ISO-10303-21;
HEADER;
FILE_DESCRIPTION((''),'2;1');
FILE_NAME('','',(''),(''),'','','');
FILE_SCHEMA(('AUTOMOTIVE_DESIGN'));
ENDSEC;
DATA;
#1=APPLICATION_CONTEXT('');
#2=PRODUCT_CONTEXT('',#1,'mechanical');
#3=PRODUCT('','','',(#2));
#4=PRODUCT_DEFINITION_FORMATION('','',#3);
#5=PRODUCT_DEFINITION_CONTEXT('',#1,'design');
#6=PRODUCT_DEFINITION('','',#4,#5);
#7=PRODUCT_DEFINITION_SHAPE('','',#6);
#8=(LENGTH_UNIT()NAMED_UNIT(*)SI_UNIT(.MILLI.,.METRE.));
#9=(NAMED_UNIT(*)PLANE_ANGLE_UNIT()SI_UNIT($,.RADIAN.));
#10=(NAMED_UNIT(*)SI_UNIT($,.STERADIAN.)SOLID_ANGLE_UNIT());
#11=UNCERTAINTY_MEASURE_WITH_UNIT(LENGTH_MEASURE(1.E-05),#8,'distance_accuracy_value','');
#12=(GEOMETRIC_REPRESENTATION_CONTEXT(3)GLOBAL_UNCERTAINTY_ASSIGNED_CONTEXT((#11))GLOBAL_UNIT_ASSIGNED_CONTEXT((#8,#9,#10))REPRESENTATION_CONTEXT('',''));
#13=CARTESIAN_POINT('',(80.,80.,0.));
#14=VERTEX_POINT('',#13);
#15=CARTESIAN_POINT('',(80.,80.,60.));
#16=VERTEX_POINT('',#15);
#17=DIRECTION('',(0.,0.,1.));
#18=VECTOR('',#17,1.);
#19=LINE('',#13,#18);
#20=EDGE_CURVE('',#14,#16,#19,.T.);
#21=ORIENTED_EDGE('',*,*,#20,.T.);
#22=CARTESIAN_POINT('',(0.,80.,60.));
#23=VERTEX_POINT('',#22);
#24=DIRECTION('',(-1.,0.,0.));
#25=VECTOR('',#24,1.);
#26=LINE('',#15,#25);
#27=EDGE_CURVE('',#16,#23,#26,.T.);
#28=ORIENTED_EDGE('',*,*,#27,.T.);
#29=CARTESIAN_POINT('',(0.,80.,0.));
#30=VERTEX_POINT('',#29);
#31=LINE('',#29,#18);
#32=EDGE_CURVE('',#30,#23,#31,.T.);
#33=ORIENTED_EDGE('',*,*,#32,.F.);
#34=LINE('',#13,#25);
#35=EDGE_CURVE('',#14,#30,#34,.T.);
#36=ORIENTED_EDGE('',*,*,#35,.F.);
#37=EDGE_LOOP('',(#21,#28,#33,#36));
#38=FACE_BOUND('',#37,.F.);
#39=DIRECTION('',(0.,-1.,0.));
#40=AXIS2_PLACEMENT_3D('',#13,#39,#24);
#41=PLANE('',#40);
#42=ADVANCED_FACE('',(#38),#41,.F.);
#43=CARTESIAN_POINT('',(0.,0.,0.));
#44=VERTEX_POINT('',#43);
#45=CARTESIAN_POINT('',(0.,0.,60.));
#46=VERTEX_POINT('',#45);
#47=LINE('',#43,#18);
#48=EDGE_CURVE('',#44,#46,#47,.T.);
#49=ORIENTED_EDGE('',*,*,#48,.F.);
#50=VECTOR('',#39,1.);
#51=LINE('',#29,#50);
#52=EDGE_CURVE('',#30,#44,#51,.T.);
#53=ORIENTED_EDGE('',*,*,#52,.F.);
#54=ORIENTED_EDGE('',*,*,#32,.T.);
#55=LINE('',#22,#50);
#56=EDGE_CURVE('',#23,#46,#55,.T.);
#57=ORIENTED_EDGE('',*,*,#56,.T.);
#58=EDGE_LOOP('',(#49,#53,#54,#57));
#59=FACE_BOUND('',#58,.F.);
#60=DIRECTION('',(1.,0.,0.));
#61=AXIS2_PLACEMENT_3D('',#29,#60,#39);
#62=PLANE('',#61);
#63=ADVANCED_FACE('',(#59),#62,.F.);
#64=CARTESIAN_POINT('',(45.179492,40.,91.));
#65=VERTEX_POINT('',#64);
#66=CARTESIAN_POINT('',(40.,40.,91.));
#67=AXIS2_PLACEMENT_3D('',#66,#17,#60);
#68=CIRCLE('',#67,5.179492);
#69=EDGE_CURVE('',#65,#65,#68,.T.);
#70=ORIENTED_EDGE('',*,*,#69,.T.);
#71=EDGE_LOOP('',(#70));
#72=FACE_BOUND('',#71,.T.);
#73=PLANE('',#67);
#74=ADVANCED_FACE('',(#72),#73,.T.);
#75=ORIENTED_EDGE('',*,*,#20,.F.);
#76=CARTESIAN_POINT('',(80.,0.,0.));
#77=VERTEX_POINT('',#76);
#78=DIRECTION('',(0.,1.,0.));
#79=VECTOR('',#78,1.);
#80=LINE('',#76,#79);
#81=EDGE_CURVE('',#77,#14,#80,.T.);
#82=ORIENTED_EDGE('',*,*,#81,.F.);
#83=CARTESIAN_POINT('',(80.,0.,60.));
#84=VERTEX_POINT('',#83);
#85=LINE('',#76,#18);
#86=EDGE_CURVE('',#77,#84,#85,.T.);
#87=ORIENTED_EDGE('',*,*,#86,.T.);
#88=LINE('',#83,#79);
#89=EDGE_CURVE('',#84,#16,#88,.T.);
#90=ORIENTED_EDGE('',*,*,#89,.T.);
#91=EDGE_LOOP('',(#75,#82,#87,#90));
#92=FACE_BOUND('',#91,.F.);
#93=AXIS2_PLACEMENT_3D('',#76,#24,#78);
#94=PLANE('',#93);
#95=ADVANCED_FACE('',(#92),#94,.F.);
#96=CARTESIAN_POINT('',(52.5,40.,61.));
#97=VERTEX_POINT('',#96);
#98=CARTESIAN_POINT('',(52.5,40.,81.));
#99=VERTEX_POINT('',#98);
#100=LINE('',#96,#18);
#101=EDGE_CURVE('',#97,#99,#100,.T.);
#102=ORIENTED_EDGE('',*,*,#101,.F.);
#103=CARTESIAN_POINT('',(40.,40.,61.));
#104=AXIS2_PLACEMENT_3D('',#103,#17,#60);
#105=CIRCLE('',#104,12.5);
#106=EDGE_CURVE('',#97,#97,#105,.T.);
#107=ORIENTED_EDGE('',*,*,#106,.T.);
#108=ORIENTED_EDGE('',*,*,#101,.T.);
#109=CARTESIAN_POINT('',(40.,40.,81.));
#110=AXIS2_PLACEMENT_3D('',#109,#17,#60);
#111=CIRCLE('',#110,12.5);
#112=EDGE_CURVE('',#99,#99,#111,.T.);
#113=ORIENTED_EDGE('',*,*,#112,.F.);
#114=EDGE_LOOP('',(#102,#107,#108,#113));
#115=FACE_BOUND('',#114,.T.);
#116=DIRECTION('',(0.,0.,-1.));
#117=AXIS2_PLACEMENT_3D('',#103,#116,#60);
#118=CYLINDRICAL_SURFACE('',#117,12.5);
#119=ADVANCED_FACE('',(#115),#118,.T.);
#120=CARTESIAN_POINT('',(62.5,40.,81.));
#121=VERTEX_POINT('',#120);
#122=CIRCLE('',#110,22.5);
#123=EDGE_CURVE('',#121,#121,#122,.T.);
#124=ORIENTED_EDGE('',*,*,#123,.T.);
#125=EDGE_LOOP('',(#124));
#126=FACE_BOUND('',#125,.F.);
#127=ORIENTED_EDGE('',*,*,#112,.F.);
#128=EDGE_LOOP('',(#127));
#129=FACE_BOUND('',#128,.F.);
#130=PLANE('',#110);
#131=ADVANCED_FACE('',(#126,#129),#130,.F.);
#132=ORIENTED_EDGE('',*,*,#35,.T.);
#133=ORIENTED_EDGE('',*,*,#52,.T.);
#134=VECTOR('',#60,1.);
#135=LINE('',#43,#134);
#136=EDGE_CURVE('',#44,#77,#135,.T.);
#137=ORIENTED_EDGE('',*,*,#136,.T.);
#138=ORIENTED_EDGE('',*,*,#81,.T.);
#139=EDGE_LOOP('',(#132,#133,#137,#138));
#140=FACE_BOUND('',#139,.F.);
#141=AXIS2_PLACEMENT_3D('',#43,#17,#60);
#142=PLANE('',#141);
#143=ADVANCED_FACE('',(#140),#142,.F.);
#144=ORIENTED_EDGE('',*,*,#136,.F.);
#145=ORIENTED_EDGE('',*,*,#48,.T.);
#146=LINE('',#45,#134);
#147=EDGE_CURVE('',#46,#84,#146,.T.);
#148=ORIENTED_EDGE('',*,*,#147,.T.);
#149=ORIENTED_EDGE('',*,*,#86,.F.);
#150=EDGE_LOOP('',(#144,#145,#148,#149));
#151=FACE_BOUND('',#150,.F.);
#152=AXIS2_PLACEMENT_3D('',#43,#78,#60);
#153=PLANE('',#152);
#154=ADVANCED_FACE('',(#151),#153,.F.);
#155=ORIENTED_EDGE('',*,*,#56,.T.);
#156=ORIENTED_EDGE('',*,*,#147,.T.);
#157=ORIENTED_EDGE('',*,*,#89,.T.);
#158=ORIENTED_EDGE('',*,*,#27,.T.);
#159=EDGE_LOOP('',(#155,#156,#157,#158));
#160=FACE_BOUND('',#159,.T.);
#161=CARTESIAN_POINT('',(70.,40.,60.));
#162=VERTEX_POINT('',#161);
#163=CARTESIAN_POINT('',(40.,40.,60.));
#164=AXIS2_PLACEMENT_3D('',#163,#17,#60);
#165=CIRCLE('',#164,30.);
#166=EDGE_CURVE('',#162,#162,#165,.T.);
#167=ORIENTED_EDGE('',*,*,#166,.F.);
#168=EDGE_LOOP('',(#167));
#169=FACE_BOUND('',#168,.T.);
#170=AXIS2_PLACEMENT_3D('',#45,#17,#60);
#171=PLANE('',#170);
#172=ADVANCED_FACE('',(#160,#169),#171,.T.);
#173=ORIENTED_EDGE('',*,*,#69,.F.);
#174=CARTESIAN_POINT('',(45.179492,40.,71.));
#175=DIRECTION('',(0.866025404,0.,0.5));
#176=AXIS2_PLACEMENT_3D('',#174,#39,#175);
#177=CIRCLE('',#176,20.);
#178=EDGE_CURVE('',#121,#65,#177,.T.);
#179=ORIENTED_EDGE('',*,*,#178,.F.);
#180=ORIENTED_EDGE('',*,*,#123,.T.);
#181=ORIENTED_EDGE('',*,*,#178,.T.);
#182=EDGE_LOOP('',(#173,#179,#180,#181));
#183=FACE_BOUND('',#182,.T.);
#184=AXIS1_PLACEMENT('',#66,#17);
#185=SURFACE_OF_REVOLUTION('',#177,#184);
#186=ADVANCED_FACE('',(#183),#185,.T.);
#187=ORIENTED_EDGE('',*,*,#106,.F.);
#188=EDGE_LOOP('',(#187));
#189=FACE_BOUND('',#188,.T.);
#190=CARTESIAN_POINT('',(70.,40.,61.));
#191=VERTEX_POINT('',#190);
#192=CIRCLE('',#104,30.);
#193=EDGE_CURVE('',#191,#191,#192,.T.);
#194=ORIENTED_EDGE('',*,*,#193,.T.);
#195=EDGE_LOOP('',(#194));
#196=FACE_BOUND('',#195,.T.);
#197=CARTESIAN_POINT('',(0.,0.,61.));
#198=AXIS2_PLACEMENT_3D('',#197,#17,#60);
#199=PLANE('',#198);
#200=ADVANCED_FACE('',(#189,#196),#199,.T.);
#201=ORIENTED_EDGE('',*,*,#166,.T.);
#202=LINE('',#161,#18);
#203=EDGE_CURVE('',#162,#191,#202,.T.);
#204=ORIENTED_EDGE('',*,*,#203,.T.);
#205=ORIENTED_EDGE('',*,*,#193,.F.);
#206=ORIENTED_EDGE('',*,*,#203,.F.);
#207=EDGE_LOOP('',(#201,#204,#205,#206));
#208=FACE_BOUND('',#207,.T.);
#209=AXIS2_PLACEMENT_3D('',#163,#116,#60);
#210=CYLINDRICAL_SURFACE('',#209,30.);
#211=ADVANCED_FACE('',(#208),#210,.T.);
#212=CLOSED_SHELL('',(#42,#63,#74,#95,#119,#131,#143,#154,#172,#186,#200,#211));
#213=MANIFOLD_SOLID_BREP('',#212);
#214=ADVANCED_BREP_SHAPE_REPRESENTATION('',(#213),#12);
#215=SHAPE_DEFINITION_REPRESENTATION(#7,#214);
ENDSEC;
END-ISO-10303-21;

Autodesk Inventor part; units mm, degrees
ref_plane "YZ Plane" through (0, 0, 0) normal (1, 0, 0) x (0, 1, 0)
ref_plane "XZ Plane" through (0, 0, 0) normal (0, 1, 0) x (-1, 0, 0)
ref_plane "XY Plane" through (0, 0, 0) normal (0, 0, 1) x (1, 0, 0)
sketch "Sketch1" plane through (0, 0, 0) normal (0, 0, 1) x (1, 0, 0)
  line L0 (0, 0) -> (80, 0)
  line L1 (80, 0) -> (80, 80)
  line L2 (80, 80) -> (0, 80)
  line L3 (0, 80) -> (0, 0)
  dimension "d0" = 80
  dimension "d1" = 80
extrude "Extrusion1" add sketch "Sketch1" along normal blind 60
sketch "Sketch2" plane through (0, 0, 60) normal (0, 0, 1) x (1, 0, 0)
  circle A0 centre (40, 40) radius 30
  line L0 (0, 80) -> (0, 0) projected
  line L1 (80, 80) -> (0, 80) projected
  dimension "d4" = 40
  dimension "d5" = 40
  dimension "d6" = 60
extrude "Extrusion2" add sketch "Sketch2" along normal blind 1
sketch "Sketch3" plane through (40, 40, 61) normal (0, 0, 1) x (1, 0, 0)
  circle A0 centre (0, 0) radius 12.5
  point P0 (-40, -40)
  dimension "d9" = 25
extrude "Extrusion3" add sketch "Sketch3" along normal blind 20
sketch "Sketch4" plane through (40, 40, 81) normal (0, 0, 1) x (1, 0, 0)
  circle A0 centre (0, 0) radius 22.5
  point P0 (-40, -40)
  dimension "d12" = 45
extrude "Extrusion4" add sketch "Sketch4" along normal blind 10
fillet "Fillet1" radius 20 1 edges at (17.5, 40, 91)
properties part number "emergencyStop"
